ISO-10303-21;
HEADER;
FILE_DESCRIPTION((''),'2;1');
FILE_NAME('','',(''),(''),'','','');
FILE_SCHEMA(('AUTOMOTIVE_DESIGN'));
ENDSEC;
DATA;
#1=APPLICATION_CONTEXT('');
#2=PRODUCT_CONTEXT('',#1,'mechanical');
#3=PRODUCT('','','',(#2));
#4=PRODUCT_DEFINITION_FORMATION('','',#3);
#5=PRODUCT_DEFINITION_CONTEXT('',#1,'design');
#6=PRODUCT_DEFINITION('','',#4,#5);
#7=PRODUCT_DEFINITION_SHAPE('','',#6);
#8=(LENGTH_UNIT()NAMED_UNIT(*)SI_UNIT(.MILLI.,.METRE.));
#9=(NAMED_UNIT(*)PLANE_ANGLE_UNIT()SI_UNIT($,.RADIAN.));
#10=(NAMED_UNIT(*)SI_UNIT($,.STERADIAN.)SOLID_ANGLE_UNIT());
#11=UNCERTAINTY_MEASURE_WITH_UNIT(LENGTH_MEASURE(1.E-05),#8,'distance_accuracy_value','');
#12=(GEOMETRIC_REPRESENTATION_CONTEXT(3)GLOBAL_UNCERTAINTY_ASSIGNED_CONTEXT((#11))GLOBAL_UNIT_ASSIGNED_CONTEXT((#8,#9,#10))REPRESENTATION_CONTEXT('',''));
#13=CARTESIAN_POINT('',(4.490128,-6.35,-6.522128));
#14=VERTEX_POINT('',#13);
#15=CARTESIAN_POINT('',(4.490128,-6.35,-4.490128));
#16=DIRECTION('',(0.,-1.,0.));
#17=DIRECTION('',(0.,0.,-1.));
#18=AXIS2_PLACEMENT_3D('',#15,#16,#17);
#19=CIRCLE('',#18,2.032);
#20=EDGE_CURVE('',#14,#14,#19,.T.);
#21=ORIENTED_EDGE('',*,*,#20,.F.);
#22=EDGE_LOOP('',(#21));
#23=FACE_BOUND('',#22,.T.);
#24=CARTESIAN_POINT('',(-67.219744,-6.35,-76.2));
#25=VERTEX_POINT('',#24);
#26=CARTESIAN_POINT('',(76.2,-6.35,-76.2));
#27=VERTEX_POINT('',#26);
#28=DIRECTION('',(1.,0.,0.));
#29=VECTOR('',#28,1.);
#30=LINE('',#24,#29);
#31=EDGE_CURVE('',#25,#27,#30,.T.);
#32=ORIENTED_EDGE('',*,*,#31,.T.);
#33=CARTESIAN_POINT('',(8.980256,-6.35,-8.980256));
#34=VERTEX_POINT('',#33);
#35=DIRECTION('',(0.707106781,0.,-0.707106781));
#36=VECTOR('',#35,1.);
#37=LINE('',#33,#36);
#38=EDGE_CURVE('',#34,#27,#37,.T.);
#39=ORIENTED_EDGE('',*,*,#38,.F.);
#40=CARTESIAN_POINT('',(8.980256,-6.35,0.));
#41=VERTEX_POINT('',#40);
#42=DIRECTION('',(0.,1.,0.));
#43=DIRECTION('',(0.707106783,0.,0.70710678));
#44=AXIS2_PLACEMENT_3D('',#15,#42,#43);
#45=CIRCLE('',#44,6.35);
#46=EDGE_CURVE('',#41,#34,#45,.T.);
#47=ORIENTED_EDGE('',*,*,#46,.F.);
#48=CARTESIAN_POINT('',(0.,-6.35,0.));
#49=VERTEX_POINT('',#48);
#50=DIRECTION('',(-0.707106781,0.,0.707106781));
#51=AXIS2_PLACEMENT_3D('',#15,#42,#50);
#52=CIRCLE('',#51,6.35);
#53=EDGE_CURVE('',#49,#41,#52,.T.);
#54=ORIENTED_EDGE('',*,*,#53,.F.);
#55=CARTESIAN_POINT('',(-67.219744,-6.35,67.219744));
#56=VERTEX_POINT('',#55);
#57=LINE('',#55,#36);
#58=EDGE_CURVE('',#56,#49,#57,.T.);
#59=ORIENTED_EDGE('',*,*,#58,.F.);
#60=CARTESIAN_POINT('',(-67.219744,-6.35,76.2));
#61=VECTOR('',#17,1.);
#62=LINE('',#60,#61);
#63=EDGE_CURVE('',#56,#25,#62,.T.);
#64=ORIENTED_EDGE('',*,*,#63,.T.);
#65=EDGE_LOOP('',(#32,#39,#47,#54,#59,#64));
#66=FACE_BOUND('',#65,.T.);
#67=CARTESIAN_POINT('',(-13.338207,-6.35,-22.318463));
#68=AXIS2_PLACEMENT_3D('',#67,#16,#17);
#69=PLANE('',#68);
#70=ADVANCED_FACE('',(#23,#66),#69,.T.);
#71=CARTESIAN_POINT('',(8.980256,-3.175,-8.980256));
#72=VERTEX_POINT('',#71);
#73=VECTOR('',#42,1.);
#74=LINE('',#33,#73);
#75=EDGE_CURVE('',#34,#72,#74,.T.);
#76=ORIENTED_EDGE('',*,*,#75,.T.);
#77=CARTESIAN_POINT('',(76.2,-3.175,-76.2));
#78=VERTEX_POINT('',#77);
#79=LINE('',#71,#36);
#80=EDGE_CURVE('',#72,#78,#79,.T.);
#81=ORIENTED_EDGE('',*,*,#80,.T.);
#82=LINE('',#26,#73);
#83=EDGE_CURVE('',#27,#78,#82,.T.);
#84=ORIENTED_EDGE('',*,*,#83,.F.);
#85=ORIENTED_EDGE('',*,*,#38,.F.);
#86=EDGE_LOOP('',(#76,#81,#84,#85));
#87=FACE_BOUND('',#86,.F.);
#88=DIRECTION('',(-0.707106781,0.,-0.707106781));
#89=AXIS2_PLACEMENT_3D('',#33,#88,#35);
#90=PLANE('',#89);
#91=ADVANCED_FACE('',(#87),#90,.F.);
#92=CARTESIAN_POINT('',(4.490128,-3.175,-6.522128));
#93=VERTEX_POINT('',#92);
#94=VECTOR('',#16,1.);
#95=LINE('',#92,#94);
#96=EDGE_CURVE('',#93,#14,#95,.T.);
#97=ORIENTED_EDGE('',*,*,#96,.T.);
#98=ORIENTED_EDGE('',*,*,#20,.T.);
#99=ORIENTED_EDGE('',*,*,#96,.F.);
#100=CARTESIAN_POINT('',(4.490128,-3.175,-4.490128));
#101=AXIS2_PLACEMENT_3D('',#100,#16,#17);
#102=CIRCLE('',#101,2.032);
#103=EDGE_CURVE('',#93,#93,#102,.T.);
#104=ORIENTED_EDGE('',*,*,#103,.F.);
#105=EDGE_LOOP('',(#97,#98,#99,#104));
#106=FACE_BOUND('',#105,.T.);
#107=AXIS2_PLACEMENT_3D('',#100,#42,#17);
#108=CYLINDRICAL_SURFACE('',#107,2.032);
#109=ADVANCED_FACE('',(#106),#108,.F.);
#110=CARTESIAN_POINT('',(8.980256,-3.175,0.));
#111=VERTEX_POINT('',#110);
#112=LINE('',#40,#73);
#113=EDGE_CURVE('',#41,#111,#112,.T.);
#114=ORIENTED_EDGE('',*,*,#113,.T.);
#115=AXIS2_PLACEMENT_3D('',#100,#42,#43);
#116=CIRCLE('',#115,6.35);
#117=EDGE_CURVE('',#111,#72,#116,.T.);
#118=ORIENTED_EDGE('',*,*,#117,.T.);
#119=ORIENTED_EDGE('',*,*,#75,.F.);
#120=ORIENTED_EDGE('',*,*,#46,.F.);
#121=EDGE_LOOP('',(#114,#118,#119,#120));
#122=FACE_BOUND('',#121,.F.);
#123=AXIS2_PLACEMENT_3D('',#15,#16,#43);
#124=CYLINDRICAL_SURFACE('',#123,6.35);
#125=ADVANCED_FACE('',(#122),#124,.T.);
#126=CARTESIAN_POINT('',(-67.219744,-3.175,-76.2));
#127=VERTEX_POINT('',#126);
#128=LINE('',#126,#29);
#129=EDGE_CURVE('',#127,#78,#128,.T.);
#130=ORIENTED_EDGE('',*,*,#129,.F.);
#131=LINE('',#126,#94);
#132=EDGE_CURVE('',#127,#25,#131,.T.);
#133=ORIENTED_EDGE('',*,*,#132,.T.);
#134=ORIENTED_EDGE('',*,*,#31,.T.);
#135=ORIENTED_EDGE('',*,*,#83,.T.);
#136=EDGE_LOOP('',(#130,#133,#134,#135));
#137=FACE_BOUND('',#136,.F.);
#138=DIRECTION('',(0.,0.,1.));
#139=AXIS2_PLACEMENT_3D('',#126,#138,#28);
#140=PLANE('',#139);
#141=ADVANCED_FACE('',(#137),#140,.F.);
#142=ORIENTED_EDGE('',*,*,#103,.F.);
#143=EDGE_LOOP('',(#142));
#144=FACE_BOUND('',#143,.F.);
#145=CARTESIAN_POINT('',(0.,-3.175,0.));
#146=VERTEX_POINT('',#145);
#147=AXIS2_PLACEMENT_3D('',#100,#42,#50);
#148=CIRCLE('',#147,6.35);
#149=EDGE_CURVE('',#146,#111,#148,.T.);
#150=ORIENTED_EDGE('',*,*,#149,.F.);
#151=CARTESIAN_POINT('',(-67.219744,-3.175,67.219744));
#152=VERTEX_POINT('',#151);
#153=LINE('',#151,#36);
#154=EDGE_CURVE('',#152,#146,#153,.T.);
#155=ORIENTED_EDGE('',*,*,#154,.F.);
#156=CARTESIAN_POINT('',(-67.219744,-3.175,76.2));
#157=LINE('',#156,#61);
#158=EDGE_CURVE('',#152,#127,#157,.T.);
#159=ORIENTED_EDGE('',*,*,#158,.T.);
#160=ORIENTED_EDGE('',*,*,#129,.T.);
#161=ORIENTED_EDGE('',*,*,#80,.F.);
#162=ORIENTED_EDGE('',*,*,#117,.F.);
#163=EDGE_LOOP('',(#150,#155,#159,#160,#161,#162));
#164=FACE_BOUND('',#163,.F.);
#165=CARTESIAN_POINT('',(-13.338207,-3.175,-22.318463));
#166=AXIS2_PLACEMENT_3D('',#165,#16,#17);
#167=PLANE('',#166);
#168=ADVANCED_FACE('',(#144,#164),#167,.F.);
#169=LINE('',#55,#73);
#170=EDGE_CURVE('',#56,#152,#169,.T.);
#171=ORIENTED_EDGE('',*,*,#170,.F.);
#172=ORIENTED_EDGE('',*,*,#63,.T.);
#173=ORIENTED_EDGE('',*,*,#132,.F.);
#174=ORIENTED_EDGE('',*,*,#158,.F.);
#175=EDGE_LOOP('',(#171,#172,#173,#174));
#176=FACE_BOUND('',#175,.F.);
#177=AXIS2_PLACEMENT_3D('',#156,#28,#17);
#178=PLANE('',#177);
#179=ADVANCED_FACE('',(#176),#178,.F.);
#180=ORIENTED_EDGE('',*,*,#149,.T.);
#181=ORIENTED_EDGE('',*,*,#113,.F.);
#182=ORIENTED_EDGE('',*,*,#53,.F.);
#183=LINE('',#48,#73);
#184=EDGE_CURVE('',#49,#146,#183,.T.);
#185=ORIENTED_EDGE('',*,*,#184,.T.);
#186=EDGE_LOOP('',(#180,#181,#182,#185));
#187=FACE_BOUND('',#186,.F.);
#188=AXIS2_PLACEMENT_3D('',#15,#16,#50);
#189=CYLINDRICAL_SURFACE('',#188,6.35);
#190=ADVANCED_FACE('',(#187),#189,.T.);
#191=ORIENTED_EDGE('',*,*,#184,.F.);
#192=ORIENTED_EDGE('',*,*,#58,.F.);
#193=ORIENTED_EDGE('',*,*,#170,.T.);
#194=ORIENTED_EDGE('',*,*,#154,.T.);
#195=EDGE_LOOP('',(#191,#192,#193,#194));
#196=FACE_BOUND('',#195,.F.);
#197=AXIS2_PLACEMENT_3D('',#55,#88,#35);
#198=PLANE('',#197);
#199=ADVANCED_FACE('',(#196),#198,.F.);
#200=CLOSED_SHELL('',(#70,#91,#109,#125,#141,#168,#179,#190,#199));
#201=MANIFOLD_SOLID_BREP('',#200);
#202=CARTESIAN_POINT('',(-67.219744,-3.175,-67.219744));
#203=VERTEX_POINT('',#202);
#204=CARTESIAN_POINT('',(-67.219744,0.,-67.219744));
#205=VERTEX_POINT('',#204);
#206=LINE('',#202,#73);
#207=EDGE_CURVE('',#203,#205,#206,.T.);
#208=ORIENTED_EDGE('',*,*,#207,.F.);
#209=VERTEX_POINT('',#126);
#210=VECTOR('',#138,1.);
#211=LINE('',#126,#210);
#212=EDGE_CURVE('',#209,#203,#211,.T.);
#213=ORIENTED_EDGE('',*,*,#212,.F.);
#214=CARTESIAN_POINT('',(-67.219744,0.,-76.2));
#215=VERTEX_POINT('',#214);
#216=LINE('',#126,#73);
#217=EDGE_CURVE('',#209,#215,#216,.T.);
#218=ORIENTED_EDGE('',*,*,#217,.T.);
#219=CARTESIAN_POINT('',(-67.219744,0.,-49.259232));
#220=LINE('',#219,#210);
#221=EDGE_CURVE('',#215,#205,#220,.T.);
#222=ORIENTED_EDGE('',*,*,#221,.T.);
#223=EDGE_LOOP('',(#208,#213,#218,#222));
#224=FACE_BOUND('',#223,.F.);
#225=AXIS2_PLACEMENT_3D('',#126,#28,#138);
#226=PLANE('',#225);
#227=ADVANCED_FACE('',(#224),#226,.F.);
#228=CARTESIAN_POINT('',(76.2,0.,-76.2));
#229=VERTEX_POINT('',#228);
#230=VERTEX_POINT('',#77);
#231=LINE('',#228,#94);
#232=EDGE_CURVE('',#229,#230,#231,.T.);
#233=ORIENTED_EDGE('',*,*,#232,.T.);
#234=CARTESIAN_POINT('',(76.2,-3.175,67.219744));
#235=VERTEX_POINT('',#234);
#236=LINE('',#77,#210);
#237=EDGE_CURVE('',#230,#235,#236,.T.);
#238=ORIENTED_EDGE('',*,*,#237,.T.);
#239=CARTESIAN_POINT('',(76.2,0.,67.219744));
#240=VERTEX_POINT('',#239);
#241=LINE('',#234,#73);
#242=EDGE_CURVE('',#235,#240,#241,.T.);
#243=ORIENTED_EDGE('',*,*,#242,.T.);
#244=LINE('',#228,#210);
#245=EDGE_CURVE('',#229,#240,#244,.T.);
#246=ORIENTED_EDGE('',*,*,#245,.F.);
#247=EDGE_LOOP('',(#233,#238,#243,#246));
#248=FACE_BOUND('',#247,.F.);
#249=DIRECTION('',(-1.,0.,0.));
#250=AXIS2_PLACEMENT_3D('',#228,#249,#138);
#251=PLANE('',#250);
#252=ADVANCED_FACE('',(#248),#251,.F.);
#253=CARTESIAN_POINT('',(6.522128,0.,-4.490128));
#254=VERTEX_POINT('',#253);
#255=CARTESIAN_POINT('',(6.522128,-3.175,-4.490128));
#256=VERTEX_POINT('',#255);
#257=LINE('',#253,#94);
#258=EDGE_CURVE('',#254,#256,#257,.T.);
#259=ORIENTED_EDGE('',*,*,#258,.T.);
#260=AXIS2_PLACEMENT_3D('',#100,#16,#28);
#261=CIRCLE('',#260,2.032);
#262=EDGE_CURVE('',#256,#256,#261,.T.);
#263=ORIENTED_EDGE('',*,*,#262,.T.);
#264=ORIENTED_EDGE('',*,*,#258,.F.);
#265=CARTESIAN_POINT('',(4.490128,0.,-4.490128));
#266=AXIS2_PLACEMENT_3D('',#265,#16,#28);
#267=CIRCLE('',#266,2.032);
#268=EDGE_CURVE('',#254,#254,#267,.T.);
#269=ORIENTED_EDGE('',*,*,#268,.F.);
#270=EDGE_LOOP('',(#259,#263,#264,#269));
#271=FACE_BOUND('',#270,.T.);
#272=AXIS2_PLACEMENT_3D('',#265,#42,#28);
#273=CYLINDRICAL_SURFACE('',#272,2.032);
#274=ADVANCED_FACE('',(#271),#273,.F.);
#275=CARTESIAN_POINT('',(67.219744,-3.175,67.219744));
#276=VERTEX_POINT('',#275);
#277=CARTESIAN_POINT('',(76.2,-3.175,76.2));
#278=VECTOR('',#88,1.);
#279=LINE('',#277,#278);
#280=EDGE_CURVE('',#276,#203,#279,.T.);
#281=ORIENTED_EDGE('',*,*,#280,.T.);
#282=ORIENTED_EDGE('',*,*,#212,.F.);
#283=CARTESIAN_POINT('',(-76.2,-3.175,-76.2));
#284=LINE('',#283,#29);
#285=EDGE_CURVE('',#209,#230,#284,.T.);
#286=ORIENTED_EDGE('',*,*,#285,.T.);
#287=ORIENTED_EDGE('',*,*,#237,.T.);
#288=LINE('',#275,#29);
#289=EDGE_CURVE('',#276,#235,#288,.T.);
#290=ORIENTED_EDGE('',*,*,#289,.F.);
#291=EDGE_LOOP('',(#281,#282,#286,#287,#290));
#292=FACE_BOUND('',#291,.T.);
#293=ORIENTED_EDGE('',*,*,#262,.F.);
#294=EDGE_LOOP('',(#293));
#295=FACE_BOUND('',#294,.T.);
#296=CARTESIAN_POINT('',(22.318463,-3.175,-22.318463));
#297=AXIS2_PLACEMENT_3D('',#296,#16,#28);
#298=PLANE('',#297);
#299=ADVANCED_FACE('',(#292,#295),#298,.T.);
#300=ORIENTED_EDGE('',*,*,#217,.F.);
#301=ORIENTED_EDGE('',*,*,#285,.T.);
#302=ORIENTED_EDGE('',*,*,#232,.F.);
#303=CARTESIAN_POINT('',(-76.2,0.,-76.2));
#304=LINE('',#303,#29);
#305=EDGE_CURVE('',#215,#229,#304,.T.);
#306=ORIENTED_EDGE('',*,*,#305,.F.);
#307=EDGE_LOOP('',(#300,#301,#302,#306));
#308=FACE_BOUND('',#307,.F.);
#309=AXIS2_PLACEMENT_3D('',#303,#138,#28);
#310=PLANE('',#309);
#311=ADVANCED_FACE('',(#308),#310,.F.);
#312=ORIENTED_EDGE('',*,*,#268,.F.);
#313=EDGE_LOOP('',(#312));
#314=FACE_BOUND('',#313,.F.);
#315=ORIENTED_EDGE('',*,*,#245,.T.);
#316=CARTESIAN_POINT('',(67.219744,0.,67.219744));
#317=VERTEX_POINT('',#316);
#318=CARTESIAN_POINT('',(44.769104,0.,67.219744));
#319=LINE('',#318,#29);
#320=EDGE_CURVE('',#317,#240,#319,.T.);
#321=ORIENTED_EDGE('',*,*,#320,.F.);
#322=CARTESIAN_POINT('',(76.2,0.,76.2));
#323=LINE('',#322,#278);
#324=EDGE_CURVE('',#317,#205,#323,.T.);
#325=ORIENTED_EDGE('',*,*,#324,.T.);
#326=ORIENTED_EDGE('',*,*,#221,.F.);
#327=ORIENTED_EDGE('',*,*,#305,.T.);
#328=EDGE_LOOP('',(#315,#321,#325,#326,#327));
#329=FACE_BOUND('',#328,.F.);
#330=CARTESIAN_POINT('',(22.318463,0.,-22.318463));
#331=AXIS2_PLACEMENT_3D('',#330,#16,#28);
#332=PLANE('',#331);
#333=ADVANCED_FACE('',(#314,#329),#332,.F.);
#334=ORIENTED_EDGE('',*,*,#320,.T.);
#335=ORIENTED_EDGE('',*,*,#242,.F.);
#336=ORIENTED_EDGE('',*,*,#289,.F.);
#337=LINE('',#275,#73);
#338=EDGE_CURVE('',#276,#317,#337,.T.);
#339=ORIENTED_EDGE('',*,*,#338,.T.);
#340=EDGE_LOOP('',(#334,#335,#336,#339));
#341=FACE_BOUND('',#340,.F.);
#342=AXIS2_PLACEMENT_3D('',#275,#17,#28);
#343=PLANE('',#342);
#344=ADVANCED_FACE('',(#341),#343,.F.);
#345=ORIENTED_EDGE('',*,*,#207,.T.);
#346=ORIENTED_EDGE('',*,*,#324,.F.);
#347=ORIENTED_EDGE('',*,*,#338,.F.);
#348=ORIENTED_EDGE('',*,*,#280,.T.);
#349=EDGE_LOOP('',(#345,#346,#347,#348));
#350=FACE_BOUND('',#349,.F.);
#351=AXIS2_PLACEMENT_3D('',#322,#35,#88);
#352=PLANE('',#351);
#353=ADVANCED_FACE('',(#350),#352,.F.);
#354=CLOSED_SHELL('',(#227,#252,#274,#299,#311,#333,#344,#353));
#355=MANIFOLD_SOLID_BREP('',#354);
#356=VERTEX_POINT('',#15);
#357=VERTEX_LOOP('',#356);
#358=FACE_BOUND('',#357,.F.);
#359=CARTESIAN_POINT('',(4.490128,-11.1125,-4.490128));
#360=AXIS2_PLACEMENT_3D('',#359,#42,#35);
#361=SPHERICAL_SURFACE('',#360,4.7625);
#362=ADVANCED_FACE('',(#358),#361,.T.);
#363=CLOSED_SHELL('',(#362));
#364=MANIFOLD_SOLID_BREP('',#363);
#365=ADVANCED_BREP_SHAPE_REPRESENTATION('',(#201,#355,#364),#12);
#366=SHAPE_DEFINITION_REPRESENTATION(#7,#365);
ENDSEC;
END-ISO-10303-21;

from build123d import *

# Parameters (mm, degrees)
F0_R      = 2.032
F1_DEPTH  = 3.175
F4_ANGLE  = 90
F6_R      = 6.35
F7_DEPTH  = 6.35
F9_DEPTH  = 3.175
F13_ANGLE = 180
F16_DEPTH = 3.176


# Not quite as in the source:
# - a feature of the source that left no trace in its solid (it failed there, or was rolled back) is left out


with BuildPart() as f1:
    # F0 (on Front) → F1 (new body)
    with BuildSketch(Plane.XZ):
        Polygon((76.2, 76.2), (-76.2, -76.2), (76.2, -76.2), align=None)
        with Locations((4.4901280605, -4.4901280605)):
            Circle(F0_R, mode=Mode.SUBTRACT)
    extrude(amount=F1_DEPTH)


with BuildPart() as f4_1:
    # F4: copy of F1
    add(f1.part.rotate(Axis((4.4901280605, -59.5605373383, -4.4901280605), (0, -1, 0)), F4_ANGLE))


with BuildPart() as f4_1_1:
    # F5: moved
    add(f4_1.part.moved(Location((0, -3.175, 0))))

    # F8 (on face) → F9 (cut, through all)
    with BuildSketch(Plane.XZ.offset(6.35)):
        with BuildLine():
            ThreePointArc((8.9802561211, -8.9802561211), (4.4901280539, -10.8401280605), (-9.4e-09, -8.9802561117))
            Line((-9.4e-09, -8.9802561117), (76.2, -85.1802561211))
            Line((76.2, -85.1802561211), (76.2, -76.2))
            Line((76.2, -76.2), (8.9802561211, -8.9802561211))
        make_face()
        with BuildLine():
            ThreePointArc((-9.4e-09, -8.9802561117), (-1.8598719395, -4.4901280539), (0, 0))
            Line((0, 0), (-67.2197438789, 67.2197438789))
            Line((-67.2197438789, 67.2197438789), (-76.2, 67.2197438789))
            Line((-76.2, 67.2197438789), (-9.4e-09, -8.9802561117))
        make_face()
    extrude(amount=-F9_DEPTH, mode=Mode.SUBTRACT)


with BuildPart() as f7:
    # F6 (on face) → F7 (new body)
    with BuildSketch(Plane.XZ.offset(6.35)):
        with Locations((4.4901280605, -4.4901280605)):
            Circle(F6_R)
    extrude(amount=F7_DEPTH)


with BuildPart() as f4_1_2:
    # F13: moved
    add(f4_1_1.part.rotate(Axis((4.4901280605, -59.5605373383, -4.4901280605), (0, -1, 0)), F13_ANGLE))


with BuildPart() as f1_1:
    add(f1.part)

    # F15 (on face) → F16 (cut, through all)
    with BuildSketch(Plane.XZ.offset(3.175)):
        Polygon((-76.2, -76.2), (-67.2197438789, -76.2), (-67.2197438789, -67.2197438789), align=None)
        Polygon((67.2197438789, 67.2197438789), (76.2, 67.2197438789), (76.2, 76.2), align=None)
    extrude(amount=-F16_DEPTH, mode=Mode.SUBTRACT)


with BuildPart() as f19:
    # F18 (on face) → F19 (revolve)
    with BuildSketch(Plane(origin=(0, 0, 0), x_dir=(0.7071067812, 0, -0.7071067812), z_dir=(0.7071067812, 0, 0.7071067812))):
        with BuildLine():
            Line((6.35, -6.35), (6.35, -15.875))
            ThreePointArc((6.35, -15.875), (11.1125, -11.1125), (6.35, -6.35))
        make_face()
    revolve(axis=Axis((4.4901280605, -17.9845464677, -4.4901280605), (0, -1, 0)))


solid = Compound([f4_1_2.part, f1_1.part, f19.part])
